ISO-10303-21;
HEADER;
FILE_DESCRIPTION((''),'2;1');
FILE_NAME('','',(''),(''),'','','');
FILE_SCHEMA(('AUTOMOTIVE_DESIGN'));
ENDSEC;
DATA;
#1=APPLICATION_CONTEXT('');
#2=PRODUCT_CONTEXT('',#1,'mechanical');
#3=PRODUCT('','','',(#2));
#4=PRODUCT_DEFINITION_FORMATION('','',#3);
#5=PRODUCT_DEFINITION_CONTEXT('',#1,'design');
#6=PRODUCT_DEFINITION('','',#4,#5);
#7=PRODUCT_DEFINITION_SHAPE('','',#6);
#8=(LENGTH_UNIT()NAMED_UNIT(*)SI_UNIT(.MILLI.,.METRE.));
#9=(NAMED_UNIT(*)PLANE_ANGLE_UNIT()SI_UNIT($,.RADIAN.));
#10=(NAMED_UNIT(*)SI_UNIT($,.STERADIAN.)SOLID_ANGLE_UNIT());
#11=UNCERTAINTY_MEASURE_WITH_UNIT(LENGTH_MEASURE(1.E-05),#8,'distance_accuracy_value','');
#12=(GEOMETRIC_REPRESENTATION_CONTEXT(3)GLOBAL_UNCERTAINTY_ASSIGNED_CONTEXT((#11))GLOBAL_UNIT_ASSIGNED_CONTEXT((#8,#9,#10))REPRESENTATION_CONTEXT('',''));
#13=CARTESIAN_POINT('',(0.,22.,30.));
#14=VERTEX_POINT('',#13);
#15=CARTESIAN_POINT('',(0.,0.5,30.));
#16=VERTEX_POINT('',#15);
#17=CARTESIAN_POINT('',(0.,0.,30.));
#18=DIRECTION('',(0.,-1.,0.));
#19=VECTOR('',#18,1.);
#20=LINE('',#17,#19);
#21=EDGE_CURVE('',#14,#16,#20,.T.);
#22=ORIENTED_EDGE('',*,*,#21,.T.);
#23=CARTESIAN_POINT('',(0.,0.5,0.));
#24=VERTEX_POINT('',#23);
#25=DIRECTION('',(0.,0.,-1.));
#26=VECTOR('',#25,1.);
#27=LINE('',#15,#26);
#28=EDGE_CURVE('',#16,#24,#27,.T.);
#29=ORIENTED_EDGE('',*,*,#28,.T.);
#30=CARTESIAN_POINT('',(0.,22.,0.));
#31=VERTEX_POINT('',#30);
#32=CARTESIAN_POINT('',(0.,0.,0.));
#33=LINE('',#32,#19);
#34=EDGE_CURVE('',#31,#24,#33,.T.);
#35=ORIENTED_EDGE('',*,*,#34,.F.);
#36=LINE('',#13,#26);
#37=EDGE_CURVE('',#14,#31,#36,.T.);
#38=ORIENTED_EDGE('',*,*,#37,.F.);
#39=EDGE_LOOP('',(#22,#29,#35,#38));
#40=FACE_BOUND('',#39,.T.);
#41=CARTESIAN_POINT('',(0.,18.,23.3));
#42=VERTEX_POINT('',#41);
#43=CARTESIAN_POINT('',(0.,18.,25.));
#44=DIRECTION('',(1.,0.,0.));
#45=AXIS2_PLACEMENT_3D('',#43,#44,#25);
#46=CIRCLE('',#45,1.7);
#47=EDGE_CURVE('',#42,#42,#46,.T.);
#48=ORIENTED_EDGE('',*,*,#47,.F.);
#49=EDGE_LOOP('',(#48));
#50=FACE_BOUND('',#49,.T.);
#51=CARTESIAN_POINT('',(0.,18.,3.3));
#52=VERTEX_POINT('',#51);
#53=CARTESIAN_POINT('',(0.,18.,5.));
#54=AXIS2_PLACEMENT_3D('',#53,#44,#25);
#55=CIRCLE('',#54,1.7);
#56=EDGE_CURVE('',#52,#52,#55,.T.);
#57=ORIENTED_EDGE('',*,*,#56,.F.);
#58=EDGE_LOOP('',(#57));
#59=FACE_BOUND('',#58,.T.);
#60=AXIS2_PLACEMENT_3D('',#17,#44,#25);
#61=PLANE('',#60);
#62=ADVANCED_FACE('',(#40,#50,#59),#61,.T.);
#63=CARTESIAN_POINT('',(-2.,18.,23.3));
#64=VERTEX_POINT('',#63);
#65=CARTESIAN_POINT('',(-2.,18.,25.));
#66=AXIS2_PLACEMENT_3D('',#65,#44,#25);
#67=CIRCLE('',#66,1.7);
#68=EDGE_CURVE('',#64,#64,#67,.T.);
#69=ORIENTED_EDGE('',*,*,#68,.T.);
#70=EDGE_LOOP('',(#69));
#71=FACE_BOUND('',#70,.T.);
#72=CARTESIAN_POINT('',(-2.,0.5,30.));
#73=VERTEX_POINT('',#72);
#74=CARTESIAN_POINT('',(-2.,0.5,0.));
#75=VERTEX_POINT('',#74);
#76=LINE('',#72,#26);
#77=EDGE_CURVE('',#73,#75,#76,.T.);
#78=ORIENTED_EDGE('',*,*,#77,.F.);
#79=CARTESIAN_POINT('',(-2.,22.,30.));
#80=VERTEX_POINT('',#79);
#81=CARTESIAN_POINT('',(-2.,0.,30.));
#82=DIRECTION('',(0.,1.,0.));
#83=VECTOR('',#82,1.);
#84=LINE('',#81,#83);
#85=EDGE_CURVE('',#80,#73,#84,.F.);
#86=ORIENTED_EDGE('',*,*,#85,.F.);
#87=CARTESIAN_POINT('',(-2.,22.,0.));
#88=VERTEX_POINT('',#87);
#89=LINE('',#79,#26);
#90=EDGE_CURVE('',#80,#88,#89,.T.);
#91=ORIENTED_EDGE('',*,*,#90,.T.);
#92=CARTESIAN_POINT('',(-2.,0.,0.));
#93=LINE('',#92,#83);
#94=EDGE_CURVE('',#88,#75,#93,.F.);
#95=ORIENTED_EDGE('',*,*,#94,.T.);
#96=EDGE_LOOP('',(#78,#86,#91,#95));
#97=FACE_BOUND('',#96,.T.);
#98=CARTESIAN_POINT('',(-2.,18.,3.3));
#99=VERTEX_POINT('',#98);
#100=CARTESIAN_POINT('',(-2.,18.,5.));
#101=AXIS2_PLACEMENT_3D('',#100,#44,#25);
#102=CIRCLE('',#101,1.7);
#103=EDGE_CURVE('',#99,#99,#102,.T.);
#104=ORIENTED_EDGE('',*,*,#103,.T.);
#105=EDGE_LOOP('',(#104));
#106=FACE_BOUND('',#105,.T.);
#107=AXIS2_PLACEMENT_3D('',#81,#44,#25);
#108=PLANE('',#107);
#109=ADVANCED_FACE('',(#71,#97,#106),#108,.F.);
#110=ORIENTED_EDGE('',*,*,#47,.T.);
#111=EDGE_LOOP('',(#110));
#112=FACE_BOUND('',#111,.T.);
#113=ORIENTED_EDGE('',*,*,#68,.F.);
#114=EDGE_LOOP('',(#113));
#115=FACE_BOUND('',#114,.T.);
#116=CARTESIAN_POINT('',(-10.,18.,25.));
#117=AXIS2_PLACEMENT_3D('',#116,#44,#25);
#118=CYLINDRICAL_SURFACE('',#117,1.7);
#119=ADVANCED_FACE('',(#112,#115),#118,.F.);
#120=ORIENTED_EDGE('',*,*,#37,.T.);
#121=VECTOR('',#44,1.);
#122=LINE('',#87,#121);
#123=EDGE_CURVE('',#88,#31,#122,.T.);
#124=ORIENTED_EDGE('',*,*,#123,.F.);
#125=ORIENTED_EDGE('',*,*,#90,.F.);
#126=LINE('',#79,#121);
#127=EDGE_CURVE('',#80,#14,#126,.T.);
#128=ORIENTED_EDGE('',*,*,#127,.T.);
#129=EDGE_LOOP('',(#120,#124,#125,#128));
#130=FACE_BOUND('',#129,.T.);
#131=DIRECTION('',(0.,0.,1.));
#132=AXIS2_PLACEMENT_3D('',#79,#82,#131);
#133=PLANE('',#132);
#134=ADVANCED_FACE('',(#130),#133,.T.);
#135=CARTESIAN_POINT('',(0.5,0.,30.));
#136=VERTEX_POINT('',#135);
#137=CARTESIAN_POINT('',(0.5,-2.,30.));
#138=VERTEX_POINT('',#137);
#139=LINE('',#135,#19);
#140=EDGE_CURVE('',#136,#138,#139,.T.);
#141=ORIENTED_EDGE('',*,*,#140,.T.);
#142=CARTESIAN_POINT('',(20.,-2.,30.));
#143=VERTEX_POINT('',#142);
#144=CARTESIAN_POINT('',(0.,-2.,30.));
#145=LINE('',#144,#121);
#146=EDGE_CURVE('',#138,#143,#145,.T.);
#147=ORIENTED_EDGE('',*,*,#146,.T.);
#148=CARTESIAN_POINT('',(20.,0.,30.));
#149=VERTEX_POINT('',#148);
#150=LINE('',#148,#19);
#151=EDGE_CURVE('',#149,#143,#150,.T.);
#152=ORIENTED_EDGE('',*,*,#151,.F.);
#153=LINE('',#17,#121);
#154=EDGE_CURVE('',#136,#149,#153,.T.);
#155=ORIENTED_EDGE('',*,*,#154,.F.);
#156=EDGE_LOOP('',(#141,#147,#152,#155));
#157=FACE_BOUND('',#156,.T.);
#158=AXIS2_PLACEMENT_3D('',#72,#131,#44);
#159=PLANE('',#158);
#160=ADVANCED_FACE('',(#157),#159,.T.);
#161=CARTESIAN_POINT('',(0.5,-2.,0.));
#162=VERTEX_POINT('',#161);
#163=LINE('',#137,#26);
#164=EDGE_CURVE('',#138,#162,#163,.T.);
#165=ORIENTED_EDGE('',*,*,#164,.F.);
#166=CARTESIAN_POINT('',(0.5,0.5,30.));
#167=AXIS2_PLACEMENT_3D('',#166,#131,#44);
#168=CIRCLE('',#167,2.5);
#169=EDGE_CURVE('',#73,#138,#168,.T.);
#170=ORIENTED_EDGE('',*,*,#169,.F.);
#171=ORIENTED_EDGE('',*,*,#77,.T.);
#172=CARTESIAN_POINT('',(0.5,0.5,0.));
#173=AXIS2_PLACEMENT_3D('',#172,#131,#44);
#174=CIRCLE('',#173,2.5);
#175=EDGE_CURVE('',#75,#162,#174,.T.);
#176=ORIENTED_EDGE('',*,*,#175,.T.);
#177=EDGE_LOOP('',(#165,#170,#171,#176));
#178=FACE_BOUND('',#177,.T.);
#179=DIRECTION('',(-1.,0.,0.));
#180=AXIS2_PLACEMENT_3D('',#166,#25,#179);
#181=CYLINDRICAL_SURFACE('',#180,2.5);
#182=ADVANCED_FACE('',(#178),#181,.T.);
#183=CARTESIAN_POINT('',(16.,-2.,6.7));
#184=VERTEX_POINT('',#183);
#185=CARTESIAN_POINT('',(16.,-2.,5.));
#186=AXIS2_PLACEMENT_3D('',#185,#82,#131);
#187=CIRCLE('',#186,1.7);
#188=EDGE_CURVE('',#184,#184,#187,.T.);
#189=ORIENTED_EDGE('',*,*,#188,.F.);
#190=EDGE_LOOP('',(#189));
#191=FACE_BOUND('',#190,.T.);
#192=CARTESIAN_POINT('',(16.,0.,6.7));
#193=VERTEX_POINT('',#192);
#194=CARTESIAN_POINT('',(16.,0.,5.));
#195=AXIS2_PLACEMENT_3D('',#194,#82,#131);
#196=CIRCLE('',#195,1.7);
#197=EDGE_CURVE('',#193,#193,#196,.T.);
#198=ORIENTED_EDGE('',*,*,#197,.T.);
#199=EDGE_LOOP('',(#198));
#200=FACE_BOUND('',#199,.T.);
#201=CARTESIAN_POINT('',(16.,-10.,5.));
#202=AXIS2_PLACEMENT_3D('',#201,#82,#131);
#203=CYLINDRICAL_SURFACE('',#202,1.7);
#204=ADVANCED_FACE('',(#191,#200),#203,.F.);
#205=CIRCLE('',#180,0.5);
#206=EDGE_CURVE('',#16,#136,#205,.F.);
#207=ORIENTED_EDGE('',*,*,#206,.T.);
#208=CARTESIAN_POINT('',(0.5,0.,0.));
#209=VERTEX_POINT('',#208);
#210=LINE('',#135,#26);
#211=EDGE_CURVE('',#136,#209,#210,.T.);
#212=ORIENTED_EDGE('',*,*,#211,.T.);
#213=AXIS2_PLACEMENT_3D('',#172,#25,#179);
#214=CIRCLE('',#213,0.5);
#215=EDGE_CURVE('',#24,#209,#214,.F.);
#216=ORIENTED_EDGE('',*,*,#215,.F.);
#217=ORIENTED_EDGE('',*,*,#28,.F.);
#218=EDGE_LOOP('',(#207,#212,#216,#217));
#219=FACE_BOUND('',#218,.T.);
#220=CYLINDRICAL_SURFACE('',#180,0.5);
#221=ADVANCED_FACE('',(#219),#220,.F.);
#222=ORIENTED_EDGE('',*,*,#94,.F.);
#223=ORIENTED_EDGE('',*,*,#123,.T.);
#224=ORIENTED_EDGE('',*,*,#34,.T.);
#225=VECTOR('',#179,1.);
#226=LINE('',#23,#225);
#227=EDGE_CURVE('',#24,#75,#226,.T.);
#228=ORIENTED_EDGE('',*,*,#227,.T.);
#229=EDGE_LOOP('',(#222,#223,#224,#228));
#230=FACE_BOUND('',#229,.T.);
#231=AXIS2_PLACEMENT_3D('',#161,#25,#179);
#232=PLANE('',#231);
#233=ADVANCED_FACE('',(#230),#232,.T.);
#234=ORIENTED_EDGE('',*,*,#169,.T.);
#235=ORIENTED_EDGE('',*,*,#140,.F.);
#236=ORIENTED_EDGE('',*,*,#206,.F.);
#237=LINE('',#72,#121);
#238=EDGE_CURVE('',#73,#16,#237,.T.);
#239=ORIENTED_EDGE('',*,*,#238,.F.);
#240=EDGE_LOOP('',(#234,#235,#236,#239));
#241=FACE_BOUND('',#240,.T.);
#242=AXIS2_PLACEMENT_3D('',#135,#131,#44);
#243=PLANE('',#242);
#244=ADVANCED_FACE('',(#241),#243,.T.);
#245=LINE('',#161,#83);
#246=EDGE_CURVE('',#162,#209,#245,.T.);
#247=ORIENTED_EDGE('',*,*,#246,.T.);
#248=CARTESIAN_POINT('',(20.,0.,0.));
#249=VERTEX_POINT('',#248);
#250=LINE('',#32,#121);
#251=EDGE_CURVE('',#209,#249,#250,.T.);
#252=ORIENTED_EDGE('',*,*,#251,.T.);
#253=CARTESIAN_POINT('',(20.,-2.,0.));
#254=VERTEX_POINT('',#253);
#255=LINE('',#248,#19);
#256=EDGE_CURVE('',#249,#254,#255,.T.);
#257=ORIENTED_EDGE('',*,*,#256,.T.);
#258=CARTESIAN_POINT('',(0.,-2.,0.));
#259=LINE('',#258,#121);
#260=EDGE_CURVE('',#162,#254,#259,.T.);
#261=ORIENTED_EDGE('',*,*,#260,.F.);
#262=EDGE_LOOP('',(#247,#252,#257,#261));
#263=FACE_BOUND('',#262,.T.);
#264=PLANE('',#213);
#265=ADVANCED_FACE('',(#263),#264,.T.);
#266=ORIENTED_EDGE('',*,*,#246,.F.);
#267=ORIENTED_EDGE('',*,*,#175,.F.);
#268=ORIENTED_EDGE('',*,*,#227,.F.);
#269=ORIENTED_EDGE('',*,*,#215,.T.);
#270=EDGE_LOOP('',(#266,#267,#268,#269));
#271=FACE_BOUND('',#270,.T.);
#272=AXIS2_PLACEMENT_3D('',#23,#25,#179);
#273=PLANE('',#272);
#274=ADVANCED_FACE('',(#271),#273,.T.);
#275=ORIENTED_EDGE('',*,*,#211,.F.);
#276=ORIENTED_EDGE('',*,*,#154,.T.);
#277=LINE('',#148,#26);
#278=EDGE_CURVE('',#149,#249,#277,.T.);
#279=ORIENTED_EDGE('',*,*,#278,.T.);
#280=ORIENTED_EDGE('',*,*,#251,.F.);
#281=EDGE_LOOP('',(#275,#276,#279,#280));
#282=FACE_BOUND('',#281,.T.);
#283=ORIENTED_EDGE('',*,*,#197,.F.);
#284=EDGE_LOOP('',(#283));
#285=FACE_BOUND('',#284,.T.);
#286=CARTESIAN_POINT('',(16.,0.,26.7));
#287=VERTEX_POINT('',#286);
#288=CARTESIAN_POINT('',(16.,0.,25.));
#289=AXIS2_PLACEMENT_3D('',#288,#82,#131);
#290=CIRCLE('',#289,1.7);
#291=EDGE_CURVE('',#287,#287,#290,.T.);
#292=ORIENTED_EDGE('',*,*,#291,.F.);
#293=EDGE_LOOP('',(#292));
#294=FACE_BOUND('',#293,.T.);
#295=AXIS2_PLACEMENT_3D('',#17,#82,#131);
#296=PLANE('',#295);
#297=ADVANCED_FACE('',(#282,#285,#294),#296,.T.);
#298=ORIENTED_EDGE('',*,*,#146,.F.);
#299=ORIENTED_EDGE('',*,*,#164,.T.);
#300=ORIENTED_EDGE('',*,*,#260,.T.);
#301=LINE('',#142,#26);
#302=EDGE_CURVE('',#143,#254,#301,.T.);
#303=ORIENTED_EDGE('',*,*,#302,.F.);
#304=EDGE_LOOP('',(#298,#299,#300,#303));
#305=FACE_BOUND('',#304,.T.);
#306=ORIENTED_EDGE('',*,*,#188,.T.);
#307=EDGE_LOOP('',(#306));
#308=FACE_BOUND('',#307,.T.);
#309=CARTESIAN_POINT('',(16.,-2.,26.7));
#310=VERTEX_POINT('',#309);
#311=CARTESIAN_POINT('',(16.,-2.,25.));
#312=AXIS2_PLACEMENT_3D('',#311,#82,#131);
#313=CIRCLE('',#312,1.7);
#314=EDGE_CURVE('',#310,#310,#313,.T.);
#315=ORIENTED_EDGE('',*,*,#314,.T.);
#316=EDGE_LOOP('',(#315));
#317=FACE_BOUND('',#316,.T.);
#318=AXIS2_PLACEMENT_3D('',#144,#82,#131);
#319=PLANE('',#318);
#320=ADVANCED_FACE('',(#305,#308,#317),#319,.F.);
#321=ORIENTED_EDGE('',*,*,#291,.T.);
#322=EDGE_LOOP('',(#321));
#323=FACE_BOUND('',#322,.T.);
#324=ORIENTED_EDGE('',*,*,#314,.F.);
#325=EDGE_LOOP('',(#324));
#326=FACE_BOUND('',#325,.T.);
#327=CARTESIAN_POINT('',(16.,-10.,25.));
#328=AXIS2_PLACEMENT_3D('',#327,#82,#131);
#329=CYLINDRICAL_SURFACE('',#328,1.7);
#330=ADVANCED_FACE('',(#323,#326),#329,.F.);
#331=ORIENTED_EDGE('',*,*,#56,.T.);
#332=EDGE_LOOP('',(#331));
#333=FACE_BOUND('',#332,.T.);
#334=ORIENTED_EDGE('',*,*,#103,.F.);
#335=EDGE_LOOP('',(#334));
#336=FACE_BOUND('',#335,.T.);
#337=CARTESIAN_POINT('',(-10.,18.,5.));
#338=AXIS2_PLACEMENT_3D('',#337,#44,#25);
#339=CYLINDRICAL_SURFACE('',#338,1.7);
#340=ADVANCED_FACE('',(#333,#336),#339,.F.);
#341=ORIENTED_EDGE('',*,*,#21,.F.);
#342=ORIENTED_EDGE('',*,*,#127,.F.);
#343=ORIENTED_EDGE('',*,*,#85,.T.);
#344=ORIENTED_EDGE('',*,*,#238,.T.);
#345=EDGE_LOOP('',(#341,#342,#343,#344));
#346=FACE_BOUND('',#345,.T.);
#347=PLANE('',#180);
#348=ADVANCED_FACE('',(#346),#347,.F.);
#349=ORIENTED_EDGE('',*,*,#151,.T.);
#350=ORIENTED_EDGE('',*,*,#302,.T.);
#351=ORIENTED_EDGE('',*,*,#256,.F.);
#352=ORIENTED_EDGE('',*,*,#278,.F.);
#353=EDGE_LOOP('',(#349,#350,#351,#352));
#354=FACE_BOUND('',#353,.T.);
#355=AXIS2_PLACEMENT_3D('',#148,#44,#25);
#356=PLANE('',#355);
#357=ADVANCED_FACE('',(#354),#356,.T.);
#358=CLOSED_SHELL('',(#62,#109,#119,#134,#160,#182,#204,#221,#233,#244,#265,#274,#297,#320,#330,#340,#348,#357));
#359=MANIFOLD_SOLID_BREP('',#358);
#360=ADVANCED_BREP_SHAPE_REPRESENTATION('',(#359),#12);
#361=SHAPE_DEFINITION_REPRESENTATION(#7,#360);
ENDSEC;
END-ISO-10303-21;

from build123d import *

# Parameters (mm, degrees)
SM_BASE_FLANGE_1_DEPTH = 30
SKETCH_6_R             = 1.7
CUT_EXTRUDE_1_DEPTH    = 10
SKETCH_7_R             = 1.7
CUT_EXTRUDE_2_DEPTH    = 10


# Sheet-metal steps are written as plain solids
with BuildPart() as part:
    # Sketch 1 → 基体-法兰1 (new body)
    with BuildSketch(Plane.XY):
        with BuildLine():
            Line((20, 0), (0.5, 0))
            ThreePointArc((0.5, 0), (0.146446609, 0.146446609), (0, 0.5))
            Line((0, 0.5), (0, 22))
            Line((0, 22), (-2, 22))
            Line((-2, 22), (-2, 0.5))
            ThreePointArc((-2, 0.5), (-1.267766953, -1.267766953), (0.5, -2))
            Line((0.5, -2), (20, -2))
            Line((20, -2), (20, 0))
        make_face()
    extrude(amount=SM_BASE_FLANGE_1_DEPTH)

    # 草图6 → 切除-拉伸1 (cut)
    with BuildSketch(Plane(origin=(0, 0, 0), x_dir=(0, 0, -1), z_dir=(1, 0, 0))):
        with Locations((-25, 18)):
            Circle(SKETCH_6_R)
        with Locations((-5, 18)):
            Circle(SKETCH_6_R)
    extrude(amount=-CUT_EXTRUDE_1_DEPTH, mode=Mode.SUBTRACT)

    # 草图7 → 切除-拉伸2 (cut)
    with BuildSketch(Plane(origin=(0, 0, 0), x_dir=(1, 0, 0), z_dir=(0, 1, 0))):
        with Locations(Location((16, -5, 0), (0, 0, 270))):
            Circle(SKETCH_7_R)
        with Locations(Location((16, -25, 0), (0, 0, 270))):
            Circle(SKETCH_7_R)
    extrude(amount=-CUT_EXTRUDE_2_DEPTH, mode=Mode.SUBTRACT)


solid = part.part
